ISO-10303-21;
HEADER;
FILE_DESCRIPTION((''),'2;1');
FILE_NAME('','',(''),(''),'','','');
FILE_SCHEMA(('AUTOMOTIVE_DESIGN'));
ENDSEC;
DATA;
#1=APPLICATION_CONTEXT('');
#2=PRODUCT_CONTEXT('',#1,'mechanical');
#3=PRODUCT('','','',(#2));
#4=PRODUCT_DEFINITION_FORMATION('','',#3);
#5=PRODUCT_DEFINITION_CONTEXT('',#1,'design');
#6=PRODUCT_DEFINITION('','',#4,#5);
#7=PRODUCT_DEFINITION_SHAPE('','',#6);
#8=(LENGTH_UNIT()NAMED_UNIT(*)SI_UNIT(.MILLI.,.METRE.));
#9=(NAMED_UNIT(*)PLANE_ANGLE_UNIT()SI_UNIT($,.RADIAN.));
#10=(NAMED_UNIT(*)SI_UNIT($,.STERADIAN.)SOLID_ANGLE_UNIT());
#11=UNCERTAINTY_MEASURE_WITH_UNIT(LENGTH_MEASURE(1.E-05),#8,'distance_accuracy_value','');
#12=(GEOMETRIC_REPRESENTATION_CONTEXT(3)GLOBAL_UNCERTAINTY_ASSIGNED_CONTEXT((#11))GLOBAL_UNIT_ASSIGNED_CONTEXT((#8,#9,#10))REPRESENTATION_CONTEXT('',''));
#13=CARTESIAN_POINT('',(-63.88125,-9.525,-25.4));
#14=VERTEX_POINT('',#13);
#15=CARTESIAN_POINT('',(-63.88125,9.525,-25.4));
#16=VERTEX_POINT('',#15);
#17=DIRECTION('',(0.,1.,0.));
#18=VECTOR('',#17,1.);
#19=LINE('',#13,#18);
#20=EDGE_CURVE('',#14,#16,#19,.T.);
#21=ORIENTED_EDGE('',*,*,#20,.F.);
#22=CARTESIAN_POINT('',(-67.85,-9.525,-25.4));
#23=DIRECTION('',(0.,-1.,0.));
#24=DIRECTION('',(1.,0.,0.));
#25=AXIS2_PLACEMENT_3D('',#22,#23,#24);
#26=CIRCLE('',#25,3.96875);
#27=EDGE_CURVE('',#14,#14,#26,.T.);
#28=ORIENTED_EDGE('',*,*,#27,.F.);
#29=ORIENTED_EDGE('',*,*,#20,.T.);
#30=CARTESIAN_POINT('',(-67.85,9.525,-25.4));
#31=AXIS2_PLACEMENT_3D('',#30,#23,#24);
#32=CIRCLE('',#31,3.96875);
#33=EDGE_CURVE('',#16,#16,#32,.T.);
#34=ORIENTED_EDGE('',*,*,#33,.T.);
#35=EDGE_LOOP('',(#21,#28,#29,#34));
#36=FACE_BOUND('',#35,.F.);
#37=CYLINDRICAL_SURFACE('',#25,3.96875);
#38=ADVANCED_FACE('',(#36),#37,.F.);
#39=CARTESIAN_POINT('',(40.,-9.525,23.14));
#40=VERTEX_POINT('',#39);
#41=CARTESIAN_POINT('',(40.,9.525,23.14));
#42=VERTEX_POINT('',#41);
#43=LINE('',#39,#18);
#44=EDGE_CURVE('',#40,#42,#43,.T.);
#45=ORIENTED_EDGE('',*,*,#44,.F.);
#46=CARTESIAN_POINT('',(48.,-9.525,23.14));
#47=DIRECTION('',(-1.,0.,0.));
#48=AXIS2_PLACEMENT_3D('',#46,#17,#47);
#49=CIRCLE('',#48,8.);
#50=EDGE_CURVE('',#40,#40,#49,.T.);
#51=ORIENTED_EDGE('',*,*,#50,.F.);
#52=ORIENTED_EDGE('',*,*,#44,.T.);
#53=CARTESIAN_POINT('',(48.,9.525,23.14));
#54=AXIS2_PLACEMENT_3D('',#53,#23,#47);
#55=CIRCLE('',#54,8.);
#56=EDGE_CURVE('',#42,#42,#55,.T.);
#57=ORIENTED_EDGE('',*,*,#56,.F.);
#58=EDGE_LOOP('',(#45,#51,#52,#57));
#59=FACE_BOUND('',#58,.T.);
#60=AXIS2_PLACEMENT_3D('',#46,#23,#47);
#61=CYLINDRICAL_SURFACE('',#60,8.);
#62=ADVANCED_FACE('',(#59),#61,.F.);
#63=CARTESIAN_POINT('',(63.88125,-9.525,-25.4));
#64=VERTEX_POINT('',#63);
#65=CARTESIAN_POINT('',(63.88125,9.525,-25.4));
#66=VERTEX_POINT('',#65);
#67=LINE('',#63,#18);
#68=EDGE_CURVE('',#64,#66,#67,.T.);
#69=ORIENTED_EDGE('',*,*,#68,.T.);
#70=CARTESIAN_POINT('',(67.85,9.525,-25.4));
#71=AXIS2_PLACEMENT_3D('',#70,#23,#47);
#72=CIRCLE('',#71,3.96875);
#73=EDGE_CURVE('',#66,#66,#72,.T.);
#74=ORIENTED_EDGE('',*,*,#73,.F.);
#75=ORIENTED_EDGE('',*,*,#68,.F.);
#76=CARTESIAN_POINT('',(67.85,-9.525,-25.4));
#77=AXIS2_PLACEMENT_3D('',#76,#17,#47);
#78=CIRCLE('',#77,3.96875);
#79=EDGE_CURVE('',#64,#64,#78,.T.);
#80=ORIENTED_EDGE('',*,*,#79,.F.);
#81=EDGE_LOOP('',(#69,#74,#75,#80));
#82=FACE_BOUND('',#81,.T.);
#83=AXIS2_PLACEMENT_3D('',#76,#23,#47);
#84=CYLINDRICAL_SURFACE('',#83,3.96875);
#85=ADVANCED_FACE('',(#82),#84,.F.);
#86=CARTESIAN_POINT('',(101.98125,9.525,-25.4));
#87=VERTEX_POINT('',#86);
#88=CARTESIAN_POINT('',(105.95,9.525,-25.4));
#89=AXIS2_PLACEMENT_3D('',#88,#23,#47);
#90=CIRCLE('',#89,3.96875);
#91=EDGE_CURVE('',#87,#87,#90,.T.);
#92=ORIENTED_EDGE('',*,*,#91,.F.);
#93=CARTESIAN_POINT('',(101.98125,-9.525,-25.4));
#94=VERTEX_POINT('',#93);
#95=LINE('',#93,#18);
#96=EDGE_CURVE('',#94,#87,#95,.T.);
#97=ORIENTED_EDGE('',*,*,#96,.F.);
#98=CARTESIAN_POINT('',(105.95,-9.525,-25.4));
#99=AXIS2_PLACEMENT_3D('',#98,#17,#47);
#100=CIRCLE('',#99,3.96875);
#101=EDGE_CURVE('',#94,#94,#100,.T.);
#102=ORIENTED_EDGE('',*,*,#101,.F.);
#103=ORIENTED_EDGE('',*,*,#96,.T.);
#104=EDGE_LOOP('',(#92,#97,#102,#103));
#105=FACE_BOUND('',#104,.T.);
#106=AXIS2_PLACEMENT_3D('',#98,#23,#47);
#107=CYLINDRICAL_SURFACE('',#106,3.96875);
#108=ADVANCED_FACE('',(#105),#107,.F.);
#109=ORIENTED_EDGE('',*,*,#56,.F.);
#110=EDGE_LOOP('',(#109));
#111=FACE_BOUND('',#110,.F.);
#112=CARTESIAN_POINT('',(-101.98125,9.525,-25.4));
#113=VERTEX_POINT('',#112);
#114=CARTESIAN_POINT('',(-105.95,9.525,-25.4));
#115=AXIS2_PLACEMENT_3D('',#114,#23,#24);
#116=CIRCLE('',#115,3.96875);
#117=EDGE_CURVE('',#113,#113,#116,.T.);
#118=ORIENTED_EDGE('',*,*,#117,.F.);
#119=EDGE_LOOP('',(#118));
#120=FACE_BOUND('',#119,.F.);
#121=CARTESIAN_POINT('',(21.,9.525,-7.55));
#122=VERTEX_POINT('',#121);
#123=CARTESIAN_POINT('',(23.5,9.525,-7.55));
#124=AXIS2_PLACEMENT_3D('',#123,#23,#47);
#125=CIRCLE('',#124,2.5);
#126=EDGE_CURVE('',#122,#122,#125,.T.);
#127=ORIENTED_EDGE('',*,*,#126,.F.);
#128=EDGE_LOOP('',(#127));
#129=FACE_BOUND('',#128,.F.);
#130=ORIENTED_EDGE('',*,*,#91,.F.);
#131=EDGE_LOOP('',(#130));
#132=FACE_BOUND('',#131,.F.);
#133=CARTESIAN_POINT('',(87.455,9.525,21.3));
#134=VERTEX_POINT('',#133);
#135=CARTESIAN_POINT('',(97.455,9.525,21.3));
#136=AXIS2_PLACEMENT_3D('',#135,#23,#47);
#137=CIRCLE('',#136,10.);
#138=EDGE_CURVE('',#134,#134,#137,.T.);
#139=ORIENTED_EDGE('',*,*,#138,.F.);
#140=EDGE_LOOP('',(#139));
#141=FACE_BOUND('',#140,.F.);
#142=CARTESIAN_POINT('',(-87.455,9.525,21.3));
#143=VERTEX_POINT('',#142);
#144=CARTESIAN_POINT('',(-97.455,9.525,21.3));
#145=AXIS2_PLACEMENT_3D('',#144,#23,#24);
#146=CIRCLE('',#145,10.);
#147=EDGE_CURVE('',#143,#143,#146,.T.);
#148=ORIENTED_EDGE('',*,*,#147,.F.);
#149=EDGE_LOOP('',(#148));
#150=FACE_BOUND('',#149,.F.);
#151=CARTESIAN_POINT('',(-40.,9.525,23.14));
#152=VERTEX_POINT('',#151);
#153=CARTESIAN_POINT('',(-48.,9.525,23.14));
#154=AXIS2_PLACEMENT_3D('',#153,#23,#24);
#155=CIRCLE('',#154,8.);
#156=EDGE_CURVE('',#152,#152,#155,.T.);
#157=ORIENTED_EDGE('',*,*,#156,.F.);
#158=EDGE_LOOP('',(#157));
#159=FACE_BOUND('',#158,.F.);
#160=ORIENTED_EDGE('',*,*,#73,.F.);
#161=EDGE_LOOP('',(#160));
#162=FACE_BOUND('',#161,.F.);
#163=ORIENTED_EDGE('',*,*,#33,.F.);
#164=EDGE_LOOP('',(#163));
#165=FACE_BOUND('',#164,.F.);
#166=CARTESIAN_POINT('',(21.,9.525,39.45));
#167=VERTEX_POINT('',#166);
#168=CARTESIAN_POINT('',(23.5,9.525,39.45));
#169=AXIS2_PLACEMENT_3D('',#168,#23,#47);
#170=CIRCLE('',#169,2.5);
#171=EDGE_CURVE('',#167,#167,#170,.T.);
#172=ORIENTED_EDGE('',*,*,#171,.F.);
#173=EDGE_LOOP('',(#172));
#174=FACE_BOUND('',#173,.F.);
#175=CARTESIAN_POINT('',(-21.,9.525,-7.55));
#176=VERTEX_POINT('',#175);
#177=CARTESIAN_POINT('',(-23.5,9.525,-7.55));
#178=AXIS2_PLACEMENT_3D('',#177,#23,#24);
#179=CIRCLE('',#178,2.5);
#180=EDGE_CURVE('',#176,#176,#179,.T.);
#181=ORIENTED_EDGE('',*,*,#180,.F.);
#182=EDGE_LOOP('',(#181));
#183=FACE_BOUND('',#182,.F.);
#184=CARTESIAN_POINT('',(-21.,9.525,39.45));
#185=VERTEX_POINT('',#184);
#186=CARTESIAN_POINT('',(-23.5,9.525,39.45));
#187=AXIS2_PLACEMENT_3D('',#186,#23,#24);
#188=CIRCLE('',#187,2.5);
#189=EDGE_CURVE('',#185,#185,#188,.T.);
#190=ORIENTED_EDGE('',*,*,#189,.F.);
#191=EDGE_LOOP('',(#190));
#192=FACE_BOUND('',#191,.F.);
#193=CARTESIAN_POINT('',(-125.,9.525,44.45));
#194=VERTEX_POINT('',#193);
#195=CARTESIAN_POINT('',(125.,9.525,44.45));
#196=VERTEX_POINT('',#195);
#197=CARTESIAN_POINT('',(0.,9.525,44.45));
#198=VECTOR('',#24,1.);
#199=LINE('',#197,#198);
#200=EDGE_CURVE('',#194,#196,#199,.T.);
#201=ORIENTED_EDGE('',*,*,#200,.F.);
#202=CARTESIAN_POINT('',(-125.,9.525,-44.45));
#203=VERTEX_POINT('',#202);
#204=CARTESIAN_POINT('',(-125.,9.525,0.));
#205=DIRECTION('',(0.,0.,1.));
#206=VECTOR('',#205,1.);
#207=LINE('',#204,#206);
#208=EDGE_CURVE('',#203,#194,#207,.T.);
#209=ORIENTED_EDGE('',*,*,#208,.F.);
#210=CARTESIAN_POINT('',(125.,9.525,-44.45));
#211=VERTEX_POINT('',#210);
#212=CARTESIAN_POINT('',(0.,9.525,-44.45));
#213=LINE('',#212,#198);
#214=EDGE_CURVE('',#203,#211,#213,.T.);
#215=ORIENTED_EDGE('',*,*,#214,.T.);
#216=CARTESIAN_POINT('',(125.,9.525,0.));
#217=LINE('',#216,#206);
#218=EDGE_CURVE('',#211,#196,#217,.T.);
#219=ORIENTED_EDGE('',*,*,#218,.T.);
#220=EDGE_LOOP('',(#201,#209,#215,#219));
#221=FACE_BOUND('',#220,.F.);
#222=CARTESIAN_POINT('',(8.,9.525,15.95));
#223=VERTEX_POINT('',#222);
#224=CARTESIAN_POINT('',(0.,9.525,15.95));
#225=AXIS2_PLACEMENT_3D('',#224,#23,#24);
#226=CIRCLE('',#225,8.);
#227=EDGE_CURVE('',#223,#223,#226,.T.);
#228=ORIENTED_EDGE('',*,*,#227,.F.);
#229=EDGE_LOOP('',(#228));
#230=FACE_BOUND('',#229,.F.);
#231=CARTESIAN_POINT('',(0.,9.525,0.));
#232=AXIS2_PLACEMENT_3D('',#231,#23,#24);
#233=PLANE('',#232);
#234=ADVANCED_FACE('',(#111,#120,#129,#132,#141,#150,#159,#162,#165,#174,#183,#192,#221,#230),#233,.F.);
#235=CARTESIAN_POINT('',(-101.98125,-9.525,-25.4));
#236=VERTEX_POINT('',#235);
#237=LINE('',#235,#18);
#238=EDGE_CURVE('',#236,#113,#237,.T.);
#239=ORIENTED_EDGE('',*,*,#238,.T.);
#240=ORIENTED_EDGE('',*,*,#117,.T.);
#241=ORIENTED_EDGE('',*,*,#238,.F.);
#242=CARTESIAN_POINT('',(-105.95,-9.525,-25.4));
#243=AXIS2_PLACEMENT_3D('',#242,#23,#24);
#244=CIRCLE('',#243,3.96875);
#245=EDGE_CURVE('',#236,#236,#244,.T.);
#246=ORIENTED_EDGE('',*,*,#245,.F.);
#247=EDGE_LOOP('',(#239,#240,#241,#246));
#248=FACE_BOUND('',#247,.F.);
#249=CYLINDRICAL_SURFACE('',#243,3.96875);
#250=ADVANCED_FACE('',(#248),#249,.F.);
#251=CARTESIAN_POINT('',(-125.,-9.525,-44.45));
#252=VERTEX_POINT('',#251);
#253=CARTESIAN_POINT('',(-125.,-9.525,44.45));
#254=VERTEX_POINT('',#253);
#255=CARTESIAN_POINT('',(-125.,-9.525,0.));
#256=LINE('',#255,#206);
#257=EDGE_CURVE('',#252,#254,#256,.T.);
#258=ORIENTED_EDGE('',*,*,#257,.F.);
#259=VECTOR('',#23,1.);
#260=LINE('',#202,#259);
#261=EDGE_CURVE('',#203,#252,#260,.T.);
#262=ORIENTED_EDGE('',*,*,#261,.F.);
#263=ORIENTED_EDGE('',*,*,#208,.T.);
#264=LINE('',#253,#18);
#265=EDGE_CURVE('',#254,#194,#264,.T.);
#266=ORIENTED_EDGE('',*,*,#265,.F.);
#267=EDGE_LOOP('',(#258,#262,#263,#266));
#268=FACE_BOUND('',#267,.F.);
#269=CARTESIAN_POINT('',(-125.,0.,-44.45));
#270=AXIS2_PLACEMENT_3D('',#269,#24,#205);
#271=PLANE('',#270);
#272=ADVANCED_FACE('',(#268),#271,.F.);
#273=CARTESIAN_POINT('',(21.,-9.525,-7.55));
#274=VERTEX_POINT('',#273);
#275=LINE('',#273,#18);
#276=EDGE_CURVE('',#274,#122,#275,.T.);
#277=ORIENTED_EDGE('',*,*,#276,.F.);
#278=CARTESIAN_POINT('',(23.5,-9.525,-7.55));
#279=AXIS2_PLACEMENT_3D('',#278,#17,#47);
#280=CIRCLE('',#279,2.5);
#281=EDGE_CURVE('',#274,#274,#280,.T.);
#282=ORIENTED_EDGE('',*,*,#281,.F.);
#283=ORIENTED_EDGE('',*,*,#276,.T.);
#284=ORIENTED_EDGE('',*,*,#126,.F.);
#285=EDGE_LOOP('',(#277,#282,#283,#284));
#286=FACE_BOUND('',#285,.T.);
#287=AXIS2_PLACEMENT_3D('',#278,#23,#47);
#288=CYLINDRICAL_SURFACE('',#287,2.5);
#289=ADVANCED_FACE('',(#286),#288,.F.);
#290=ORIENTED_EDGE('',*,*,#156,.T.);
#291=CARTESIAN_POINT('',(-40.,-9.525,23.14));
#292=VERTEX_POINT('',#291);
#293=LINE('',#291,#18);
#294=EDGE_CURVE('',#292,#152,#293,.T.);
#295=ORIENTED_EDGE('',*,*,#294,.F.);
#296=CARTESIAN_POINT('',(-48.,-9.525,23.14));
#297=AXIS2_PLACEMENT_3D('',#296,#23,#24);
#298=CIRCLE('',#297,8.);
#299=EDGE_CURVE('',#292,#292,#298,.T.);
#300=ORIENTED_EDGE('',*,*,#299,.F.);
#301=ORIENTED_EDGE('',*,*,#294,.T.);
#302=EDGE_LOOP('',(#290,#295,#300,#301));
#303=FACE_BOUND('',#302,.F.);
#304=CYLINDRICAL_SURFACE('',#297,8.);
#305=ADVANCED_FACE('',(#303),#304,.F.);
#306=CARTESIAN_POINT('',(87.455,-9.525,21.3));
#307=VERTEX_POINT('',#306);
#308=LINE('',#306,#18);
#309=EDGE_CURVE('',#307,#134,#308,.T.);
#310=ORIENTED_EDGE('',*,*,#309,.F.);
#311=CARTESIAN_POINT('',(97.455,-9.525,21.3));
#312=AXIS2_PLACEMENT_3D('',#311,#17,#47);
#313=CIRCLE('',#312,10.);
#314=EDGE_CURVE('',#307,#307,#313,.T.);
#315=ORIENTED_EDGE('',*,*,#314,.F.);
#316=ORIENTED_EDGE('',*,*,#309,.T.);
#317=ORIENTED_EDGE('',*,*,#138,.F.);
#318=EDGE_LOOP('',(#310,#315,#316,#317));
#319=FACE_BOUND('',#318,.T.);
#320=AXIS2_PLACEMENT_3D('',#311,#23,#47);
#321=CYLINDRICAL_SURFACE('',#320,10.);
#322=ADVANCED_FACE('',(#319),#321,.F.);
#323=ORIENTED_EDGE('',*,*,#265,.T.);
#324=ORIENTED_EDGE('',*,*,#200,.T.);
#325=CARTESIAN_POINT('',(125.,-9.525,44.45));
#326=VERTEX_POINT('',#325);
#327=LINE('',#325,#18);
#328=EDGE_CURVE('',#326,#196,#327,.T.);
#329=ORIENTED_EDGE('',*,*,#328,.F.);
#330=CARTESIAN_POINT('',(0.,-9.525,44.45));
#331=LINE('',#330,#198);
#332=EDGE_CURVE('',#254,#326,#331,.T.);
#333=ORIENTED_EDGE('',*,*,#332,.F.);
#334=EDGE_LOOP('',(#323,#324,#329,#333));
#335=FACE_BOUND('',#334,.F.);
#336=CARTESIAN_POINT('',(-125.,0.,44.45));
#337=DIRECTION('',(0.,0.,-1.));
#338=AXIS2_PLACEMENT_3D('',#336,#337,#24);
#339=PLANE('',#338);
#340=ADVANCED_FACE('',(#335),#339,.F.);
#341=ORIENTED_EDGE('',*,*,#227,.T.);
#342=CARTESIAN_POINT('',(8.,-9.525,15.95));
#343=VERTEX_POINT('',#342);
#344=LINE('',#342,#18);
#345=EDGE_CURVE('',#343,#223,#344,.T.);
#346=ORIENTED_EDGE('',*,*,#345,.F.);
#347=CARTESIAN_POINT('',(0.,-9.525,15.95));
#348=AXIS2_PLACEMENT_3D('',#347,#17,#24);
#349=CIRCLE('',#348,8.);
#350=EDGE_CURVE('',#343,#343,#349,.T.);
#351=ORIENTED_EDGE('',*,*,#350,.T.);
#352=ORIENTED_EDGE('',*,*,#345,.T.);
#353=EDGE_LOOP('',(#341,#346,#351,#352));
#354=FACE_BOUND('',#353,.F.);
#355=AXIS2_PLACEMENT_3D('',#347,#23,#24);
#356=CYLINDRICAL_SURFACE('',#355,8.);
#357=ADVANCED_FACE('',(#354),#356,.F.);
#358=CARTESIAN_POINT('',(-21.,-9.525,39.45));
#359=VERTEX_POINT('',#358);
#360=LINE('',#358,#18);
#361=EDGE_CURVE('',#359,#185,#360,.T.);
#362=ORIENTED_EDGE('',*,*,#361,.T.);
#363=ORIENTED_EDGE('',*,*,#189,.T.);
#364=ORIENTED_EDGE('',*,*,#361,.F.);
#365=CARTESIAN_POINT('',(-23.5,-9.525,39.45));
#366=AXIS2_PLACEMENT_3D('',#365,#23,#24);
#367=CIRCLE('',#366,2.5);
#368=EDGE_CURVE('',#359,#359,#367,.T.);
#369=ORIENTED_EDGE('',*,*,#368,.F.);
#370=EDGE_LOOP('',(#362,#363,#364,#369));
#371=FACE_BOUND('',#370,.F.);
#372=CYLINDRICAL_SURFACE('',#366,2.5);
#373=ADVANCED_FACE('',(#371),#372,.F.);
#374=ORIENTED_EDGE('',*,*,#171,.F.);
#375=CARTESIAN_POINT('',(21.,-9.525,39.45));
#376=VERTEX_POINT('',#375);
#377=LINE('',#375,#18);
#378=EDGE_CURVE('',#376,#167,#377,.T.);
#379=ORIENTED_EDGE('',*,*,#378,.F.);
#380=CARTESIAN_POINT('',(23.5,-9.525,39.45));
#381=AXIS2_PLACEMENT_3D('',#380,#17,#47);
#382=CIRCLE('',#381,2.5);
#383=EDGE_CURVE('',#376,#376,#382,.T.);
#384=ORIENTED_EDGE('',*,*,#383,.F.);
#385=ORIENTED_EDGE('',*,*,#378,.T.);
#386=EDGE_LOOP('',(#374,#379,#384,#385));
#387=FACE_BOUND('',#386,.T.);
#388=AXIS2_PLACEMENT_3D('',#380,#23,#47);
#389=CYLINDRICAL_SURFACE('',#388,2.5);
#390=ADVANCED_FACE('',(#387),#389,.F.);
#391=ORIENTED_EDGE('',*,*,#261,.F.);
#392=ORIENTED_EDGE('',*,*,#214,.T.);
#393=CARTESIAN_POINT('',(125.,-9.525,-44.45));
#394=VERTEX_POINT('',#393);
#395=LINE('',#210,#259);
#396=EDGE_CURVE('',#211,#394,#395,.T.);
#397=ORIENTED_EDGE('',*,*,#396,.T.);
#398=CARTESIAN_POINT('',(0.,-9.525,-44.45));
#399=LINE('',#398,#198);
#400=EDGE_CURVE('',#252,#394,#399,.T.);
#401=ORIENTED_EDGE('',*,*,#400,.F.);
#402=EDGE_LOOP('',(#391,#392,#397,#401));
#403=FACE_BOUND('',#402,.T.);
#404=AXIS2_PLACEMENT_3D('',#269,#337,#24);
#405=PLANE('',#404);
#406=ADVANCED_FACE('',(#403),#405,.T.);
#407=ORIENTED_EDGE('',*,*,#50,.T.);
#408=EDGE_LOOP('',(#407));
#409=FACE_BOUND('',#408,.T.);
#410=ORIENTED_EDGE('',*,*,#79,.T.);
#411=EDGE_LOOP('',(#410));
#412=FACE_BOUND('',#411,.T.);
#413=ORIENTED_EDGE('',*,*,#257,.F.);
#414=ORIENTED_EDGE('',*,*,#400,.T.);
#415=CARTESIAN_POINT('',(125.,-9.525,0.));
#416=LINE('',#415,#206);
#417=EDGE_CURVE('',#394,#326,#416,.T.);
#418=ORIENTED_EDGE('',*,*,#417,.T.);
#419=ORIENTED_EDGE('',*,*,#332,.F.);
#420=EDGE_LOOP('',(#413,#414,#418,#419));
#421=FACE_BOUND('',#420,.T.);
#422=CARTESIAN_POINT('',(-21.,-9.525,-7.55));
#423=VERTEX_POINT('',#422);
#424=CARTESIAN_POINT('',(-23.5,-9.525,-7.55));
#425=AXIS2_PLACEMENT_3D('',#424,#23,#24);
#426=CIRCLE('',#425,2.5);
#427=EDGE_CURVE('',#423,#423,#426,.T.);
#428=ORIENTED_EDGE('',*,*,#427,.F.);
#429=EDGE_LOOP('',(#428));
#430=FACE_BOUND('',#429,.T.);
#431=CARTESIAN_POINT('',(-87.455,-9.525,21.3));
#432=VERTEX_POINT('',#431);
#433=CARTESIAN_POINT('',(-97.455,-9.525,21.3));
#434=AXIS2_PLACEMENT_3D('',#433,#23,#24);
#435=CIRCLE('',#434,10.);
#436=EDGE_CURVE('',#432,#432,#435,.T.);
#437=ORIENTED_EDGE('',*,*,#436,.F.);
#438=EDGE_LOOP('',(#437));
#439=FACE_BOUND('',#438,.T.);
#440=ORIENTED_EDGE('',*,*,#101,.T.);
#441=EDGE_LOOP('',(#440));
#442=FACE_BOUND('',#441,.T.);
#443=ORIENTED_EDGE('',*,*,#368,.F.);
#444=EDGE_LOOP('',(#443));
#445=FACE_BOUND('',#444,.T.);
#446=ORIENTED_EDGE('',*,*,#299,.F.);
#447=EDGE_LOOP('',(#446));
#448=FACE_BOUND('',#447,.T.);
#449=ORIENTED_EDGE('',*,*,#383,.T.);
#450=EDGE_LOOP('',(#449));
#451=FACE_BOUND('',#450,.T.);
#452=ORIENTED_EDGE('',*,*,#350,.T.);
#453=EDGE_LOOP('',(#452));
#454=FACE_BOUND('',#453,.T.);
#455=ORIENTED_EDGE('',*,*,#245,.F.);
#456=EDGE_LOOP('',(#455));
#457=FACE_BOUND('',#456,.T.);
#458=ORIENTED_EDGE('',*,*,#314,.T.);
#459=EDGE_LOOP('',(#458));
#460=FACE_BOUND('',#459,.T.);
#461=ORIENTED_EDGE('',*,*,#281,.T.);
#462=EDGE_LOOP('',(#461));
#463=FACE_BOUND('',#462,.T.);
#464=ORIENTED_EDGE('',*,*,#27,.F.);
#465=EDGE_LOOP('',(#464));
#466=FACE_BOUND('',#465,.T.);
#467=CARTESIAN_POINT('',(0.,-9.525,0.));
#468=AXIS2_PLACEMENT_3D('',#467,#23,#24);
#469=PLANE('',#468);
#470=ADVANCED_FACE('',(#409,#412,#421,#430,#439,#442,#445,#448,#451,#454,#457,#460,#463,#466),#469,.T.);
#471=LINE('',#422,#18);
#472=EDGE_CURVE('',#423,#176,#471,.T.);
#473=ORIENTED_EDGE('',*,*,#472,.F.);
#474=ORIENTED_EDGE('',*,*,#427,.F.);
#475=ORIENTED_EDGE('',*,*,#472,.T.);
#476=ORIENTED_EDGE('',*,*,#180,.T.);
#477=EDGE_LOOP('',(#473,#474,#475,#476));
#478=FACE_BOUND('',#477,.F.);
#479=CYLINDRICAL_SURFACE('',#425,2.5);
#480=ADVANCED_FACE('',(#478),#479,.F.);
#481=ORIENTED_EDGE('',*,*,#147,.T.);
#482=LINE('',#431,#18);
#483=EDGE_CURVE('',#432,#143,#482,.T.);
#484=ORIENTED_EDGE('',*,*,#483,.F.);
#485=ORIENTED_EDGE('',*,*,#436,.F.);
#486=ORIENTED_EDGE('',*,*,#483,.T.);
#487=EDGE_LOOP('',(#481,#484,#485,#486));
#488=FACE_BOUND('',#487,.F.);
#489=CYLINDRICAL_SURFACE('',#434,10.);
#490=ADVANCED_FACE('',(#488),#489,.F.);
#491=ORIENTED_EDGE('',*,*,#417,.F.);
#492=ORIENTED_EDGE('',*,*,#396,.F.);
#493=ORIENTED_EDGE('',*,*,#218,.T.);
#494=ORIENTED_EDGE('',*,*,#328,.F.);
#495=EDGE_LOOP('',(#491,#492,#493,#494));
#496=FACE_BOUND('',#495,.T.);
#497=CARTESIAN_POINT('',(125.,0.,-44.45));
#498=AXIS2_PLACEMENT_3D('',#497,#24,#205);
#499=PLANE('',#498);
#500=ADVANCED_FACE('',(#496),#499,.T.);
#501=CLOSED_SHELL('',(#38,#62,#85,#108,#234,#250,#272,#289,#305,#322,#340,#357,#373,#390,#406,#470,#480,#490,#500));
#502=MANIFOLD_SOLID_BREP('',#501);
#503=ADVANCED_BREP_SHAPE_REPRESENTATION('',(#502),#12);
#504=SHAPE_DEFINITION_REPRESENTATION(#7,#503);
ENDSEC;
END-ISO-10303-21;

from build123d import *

# Parameters (mm, degrees)
F0_W     = 250
F0_H     = 88.9
F1_DEPTH = 9.525
F2_R     = 8
F2_R_2   = 2.5
F2_R_3   = 10
F2_R_4   = 3.96875
F3_DEPTH = 25.4


# Not quite as in the source:
# - a pattern or mirror of a feature is missing from the dataset's text; its kind, count and spacing are read off the source's solid


with BuildPart() as f1:
    # F0 (on Front) → F1 (new body, symmetric)
    with BuildSketch(Plane.XZ):
        Rectangle(F0_W, F0_H)
    extrude(amount=F1_DEPTH, both=True)

    # F2 (on face) → F3 (cut)
    with BuildSketch(Plane.XZ.offset(9.525)):
        with Locations((-48, 23.14)):
            Circle(F2_R)
        with Locations((0, 15.95)):
            Circle(F2_R)
        with Locations((-23.5, -7.55)):
            Circle(F2_R_2)
        with Locations((-23.5, 39.45)):
            Circle(F2_R_2)
        with Locations((-97.455, 21.3)):
            Circle(F2_R_3)
        with Locations((-67.85, -25.4)):
            Circle(F2_R_4)
        with Locations((-105.95, -25.4)):
            Circle(F2_R_4)
    f3 = extrude(amount=-F3_DEPTH, mode=Mode.SUBTRACT)

    # F3_copies: F3 across plane
    add(f3.mirror(Plane(origin=(0, 0, 0), x_dir=(0, 0, 1), z_dir=(1, 0, 0))), mode=Mode.SUBTRACT)


solid = f1.part
